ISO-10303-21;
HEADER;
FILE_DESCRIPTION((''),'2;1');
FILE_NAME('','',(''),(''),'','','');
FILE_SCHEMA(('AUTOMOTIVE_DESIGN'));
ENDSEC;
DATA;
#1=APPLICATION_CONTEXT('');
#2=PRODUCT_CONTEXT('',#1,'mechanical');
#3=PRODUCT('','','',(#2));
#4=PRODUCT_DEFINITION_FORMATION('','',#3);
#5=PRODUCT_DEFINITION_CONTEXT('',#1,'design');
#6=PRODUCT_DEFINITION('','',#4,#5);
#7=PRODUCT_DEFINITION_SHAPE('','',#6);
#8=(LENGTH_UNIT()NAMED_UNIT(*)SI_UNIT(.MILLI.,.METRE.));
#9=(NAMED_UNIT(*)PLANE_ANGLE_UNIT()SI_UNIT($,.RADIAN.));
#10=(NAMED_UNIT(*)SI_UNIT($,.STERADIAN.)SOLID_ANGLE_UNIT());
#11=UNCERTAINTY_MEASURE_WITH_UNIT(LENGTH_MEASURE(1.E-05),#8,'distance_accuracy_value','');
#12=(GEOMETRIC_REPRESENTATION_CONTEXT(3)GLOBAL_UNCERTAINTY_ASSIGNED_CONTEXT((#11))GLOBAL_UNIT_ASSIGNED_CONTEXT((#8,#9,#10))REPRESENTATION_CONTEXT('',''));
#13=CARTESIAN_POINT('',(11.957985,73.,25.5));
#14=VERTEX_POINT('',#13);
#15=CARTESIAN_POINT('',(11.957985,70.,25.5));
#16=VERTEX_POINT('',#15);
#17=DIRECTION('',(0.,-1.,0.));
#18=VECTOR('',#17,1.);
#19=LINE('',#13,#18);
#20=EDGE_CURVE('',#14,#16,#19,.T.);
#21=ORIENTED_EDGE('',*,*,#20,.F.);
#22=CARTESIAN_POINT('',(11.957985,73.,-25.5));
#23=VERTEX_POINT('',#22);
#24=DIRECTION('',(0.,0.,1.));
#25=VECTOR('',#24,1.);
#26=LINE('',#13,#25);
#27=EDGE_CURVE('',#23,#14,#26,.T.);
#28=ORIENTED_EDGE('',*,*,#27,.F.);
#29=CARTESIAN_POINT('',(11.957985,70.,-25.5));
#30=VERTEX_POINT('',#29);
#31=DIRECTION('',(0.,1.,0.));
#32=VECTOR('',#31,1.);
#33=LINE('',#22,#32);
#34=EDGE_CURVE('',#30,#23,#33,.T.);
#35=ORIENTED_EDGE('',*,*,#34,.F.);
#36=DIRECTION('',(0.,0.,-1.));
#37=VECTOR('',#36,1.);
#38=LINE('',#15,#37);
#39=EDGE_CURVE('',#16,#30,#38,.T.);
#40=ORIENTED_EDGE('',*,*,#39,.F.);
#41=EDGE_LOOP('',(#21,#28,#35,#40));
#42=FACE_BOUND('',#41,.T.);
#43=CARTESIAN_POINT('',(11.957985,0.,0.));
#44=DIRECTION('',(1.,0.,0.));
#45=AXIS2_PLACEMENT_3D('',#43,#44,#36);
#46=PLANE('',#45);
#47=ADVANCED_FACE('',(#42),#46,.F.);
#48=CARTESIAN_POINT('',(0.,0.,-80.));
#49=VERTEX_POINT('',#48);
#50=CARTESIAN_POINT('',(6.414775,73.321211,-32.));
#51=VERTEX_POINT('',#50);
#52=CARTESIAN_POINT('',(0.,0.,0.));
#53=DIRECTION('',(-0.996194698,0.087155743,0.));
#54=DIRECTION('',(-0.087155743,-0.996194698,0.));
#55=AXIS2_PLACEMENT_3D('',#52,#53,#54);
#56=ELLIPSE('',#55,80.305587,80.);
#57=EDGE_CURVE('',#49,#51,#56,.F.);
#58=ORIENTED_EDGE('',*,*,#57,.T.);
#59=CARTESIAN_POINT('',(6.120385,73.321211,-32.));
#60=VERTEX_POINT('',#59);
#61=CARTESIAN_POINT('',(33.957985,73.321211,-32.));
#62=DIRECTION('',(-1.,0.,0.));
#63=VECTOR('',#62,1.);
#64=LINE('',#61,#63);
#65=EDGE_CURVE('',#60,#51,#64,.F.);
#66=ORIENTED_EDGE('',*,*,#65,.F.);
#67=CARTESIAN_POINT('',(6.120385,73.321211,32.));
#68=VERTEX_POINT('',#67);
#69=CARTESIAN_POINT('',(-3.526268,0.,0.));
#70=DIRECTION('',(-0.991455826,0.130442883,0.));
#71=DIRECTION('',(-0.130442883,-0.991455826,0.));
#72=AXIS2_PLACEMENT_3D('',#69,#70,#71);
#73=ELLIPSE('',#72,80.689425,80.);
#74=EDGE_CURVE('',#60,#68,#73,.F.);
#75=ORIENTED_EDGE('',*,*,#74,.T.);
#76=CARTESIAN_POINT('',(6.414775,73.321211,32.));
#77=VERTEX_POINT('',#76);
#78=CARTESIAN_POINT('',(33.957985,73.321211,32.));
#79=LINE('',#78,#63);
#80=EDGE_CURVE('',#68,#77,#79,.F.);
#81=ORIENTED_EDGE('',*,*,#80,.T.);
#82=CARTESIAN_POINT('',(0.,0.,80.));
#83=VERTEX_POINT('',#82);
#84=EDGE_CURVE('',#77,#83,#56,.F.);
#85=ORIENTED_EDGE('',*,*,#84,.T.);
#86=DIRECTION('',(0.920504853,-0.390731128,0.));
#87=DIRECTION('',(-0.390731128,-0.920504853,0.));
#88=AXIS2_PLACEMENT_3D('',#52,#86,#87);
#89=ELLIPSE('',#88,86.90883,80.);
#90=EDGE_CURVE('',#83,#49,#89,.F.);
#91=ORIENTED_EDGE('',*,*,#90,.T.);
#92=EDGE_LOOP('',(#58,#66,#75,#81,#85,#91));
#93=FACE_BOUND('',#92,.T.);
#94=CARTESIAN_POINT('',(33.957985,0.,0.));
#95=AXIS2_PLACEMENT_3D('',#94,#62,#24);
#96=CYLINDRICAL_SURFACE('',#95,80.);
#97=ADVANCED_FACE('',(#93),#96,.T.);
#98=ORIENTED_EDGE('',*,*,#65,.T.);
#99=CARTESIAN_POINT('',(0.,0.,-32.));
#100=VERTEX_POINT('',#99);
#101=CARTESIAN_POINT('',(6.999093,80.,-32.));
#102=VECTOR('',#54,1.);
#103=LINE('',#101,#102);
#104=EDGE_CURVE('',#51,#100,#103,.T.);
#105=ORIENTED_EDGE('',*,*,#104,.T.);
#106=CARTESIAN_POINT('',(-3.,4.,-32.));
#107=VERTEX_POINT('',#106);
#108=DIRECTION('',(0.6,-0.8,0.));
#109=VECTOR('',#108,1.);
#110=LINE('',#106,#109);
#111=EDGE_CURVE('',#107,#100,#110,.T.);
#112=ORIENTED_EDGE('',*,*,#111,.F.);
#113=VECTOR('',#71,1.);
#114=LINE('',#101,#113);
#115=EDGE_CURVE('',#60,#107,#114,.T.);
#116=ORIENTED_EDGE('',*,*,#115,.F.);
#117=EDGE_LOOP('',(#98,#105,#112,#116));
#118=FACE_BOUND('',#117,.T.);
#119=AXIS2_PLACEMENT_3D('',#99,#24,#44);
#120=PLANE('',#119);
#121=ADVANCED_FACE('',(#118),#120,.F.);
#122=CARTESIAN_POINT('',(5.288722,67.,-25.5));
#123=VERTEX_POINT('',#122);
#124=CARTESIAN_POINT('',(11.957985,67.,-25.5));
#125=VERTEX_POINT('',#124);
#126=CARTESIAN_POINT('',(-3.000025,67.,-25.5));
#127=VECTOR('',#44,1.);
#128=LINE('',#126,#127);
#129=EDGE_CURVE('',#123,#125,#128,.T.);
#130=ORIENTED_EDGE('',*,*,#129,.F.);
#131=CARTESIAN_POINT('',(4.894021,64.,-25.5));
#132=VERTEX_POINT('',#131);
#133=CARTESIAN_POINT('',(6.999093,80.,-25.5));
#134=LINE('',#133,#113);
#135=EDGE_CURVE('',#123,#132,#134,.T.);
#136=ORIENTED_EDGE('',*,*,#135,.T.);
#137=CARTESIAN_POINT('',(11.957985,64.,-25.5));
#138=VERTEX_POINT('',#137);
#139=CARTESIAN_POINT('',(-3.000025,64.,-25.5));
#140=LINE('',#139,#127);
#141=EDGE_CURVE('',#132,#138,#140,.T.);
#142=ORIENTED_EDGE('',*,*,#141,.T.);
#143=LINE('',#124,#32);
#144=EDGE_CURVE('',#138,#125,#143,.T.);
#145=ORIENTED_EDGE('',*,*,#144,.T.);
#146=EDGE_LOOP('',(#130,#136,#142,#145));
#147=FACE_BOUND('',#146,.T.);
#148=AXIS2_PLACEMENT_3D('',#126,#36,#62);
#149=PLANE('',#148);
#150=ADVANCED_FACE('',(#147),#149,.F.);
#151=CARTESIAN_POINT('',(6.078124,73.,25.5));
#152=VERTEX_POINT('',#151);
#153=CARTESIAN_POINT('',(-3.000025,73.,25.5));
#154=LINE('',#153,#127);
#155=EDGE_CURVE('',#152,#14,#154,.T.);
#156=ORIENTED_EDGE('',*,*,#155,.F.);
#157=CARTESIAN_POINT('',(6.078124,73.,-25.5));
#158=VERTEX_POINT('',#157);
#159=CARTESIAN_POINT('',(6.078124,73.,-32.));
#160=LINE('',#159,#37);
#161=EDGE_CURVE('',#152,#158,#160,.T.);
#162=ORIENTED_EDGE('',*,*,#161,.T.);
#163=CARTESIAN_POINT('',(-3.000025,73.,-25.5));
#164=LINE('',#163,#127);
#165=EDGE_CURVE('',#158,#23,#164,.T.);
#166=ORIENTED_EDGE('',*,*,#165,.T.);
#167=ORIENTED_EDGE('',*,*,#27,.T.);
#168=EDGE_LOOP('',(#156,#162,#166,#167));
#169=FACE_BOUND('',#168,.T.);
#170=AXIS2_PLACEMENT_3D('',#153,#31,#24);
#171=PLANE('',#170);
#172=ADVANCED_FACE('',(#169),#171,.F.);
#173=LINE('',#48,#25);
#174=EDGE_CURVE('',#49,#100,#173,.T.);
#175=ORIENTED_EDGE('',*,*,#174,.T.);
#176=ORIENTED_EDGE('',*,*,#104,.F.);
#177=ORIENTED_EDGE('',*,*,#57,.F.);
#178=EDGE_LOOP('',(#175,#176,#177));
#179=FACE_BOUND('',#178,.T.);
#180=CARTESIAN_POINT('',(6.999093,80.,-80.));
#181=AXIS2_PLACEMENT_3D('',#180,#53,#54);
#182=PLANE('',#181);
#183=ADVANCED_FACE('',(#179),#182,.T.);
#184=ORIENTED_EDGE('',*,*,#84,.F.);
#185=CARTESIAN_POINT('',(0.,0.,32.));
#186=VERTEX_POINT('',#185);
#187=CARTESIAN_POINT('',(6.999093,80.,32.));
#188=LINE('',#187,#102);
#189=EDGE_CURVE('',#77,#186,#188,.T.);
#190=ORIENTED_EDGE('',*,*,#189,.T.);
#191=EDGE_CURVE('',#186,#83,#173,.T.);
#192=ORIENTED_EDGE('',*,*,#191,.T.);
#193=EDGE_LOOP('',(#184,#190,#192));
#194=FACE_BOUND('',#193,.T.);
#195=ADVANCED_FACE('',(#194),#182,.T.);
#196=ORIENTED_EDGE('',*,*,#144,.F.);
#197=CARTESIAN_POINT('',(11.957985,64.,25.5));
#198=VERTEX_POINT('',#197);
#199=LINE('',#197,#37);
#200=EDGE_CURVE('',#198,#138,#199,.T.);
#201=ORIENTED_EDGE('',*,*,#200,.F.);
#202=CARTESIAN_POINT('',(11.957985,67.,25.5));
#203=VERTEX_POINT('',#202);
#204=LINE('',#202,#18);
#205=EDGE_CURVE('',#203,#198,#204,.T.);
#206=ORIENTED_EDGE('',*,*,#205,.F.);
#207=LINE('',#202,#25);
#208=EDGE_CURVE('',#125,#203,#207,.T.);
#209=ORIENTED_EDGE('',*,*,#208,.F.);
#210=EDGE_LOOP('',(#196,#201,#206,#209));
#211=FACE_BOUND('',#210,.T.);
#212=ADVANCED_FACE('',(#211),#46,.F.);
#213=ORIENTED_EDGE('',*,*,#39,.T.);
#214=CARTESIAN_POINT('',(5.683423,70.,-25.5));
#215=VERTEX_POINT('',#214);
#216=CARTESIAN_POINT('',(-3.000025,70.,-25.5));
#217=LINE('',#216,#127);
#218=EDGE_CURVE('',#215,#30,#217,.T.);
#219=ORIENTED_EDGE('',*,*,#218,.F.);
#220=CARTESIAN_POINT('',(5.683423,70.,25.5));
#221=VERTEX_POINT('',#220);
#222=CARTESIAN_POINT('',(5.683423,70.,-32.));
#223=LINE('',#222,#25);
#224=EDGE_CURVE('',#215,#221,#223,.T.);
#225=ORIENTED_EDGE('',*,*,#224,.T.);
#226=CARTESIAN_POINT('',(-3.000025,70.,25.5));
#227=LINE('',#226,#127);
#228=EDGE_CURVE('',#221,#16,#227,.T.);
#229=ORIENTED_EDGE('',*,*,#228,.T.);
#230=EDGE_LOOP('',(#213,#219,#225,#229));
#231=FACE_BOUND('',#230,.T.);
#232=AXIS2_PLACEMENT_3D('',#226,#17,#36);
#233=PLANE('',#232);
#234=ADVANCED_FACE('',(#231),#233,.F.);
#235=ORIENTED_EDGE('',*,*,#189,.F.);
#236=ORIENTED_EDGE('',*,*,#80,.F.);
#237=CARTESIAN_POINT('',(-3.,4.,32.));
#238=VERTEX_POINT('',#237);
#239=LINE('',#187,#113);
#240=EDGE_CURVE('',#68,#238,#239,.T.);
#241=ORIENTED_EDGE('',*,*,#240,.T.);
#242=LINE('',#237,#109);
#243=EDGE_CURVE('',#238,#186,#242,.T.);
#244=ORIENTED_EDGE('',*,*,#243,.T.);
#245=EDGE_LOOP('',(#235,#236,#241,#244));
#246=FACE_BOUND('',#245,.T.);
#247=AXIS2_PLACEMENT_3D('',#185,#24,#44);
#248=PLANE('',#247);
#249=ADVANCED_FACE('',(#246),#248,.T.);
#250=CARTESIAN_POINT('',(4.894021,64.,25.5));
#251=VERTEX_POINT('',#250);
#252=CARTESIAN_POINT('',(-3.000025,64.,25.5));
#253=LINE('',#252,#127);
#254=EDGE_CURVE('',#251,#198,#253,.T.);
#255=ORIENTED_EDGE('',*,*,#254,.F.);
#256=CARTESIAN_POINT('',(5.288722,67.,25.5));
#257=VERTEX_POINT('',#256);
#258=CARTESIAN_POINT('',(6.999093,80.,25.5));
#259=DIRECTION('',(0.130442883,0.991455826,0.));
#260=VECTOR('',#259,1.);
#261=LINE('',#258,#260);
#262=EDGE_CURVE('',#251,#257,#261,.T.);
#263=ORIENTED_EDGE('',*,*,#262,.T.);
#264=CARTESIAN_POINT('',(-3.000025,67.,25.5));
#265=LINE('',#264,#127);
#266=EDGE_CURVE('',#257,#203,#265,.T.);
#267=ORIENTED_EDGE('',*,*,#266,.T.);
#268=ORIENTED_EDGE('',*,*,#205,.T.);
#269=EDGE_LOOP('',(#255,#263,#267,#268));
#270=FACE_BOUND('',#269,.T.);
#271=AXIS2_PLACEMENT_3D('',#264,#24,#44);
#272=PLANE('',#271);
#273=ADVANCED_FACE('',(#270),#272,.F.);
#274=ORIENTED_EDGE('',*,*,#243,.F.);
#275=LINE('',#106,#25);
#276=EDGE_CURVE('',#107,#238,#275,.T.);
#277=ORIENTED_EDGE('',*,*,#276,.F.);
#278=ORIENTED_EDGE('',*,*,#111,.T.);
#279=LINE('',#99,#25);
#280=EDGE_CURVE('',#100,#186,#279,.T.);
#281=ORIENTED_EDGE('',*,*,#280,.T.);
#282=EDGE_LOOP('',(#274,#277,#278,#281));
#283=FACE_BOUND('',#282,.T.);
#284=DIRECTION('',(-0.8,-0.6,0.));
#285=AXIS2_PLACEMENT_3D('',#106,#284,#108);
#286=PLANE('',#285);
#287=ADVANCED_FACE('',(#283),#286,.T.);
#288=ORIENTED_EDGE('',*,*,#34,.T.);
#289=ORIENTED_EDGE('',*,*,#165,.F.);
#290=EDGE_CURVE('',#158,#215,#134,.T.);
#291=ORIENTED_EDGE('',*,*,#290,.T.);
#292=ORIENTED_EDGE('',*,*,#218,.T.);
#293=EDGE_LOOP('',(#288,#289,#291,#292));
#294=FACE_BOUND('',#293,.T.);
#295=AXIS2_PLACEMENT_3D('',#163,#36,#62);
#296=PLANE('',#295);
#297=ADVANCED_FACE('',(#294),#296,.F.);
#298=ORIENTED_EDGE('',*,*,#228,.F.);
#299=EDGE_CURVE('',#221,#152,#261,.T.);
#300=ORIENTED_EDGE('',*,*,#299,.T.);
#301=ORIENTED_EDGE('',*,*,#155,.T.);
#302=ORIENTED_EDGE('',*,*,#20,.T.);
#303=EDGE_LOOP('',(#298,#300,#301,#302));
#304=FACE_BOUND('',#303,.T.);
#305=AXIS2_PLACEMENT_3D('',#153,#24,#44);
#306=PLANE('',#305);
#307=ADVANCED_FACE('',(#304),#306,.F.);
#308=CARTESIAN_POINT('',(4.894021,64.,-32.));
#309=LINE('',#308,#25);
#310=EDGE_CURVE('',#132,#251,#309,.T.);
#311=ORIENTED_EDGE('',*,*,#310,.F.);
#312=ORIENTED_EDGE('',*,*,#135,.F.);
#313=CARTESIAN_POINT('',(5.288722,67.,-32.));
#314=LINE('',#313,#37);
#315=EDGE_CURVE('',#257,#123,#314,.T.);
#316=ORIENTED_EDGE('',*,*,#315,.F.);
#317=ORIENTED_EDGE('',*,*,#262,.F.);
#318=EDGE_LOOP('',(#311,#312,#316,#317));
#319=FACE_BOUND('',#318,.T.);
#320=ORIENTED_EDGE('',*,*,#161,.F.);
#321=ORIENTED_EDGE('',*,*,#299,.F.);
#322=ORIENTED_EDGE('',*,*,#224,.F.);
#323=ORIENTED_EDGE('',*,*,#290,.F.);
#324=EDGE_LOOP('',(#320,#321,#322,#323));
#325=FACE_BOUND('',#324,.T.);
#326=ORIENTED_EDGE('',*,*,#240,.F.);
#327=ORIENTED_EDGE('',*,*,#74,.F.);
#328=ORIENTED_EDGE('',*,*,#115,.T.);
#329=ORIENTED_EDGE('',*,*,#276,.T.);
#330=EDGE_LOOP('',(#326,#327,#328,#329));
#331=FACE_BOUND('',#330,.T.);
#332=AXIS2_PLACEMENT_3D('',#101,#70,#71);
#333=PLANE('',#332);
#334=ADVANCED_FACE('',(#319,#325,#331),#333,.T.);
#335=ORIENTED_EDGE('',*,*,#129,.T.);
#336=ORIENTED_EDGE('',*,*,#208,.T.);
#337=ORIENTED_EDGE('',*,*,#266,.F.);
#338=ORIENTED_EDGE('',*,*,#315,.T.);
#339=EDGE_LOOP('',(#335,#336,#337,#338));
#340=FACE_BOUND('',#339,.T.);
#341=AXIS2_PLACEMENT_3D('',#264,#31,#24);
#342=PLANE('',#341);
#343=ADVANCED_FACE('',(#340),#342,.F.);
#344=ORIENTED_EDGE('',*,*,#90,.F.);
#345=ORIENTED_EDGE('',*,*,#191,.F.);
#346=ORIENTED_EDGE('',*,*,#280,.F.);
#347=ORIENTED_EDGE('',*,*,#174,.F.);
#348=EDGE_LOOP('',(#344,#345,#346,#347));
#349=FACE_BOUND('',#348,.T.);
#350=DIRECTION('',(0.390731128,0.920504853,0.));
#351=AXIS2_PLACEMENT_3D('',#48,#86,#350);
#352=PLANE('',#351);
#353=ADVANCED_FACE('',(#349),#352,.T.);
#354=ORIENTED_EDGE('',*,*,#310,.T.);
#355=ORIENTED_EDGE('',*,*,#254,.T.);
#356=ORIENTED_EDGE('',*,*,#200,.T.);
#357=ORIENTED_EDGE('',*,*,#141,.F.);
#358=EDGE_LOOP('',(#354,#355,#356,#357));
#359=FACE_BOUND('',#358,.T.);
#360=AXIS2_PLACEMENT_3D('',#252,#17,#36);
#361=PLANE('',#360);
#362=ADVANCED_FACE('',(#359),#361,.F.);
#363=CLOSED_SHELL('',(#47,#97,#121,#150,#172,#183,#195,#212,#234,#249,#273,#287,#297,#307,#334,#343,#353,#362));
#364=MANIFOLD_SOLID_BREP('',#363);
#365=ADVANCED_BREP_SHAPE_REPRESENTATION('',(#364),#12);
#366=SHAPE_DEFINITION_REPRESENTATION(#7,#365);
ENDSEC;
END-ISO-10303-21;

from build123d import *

# Parameters (mm, degrees)
EXTRUDE_1_DEPTH      = 80
EXTRUDE_1_DEPTH_BACK = 80
EXTRUDE_2_DEPTH      = 32
EXTRUDE_2_DEPTH_BACK = 32
CUT_EXTRUDE_6_DEPTH  = 33.957985297
CUT_EXTRUDE_START    = -22
SKETCH_14_W          = 51
SKETCH_14_H          = 3
CUT_EXTRUDE_7_DEPTH  = 98.020555692


# Read off the part's stored shape, not the designer's step: Вырез-Вытянуть6
with BuildPart() as part:
    # Эскиз11 → Бобышка-Вытянуть1 (new, two sides: drawn at the far end of the back side and taken through both)
    with BuildSketch(Plane.XY.offset(-EXTRUDE_1_DEPTH_BACK)):
        Polygon((0, 0), (33.957985297, 80), (6.999093082, 80), align=None)
    extrude(amount=EXTRUDE_1_DEPTH + EXTRUDE_1_DEPTH_BACK)

    # Эскиз13 → Бобышка-Вытянуть2 (add, two sides: drawn at the far end of the back side and taken through both)
    with BuildSketch(Plane.XY.offset(-EXTRUDE_2_DEPTH_BACK)):
        Polygon((6.999093082, 80), (-3, 4), (0, 0), align=None)
    extrude(amount=EXTRUDE_2_DEPTH + EXTRUDE_2_DEPTH_BACK)

    # Вырез-Вытянуть6 outline → Вырез-Вытянуть6 (cut)
    with BuildSketch(Plane(origin=(0, 0, 0), x_dir=(0, 0, -1), z_dir=(1, 0, 0))):
        with BuildLine():
            Line((-80, 80), (-80, 0))
            ThreePointArc((-80, 0), (-56.568542382, 56.568542608), (3.2e-07, 80))
            Line((3.2e-07, 80), (-80, 80))
        make_face()
        with BuildLine():
            ThreePointArc((3.2e-07, 80), (56.568542608, 56.568542382), (80, 0))
            Line((80, 0), (80, 80))
            Line((80, 80), (3.2e-07, 80))
        make_face()
    extrude(amount=CUT_EXTRUDE_6_DEPTH, mode=Mode.SUBTRACT)

    # Эскиз14 → Вырез-Вытянуть7 (cut, through all)
    with BuildSketch(Plane(origin=(33.957985297, 0, 0), x_dir=(0, 0, -1), z_dir=(1, 0, 0)).offset(CUT_EXTRUDE_START)):
        with Locations((0, 71.5)):
            Rectangle(SKETCH_14_W, SKETCH_14_H)
        with Locations((0, 65.5)):
            Rectangle(SKETCH_14_W, SKETCH_14_H)
    extrude(amount=-CUT_EXTRUDE_7_DEPTH, mode=Mode.SUBTRACT)


solid = part.part
